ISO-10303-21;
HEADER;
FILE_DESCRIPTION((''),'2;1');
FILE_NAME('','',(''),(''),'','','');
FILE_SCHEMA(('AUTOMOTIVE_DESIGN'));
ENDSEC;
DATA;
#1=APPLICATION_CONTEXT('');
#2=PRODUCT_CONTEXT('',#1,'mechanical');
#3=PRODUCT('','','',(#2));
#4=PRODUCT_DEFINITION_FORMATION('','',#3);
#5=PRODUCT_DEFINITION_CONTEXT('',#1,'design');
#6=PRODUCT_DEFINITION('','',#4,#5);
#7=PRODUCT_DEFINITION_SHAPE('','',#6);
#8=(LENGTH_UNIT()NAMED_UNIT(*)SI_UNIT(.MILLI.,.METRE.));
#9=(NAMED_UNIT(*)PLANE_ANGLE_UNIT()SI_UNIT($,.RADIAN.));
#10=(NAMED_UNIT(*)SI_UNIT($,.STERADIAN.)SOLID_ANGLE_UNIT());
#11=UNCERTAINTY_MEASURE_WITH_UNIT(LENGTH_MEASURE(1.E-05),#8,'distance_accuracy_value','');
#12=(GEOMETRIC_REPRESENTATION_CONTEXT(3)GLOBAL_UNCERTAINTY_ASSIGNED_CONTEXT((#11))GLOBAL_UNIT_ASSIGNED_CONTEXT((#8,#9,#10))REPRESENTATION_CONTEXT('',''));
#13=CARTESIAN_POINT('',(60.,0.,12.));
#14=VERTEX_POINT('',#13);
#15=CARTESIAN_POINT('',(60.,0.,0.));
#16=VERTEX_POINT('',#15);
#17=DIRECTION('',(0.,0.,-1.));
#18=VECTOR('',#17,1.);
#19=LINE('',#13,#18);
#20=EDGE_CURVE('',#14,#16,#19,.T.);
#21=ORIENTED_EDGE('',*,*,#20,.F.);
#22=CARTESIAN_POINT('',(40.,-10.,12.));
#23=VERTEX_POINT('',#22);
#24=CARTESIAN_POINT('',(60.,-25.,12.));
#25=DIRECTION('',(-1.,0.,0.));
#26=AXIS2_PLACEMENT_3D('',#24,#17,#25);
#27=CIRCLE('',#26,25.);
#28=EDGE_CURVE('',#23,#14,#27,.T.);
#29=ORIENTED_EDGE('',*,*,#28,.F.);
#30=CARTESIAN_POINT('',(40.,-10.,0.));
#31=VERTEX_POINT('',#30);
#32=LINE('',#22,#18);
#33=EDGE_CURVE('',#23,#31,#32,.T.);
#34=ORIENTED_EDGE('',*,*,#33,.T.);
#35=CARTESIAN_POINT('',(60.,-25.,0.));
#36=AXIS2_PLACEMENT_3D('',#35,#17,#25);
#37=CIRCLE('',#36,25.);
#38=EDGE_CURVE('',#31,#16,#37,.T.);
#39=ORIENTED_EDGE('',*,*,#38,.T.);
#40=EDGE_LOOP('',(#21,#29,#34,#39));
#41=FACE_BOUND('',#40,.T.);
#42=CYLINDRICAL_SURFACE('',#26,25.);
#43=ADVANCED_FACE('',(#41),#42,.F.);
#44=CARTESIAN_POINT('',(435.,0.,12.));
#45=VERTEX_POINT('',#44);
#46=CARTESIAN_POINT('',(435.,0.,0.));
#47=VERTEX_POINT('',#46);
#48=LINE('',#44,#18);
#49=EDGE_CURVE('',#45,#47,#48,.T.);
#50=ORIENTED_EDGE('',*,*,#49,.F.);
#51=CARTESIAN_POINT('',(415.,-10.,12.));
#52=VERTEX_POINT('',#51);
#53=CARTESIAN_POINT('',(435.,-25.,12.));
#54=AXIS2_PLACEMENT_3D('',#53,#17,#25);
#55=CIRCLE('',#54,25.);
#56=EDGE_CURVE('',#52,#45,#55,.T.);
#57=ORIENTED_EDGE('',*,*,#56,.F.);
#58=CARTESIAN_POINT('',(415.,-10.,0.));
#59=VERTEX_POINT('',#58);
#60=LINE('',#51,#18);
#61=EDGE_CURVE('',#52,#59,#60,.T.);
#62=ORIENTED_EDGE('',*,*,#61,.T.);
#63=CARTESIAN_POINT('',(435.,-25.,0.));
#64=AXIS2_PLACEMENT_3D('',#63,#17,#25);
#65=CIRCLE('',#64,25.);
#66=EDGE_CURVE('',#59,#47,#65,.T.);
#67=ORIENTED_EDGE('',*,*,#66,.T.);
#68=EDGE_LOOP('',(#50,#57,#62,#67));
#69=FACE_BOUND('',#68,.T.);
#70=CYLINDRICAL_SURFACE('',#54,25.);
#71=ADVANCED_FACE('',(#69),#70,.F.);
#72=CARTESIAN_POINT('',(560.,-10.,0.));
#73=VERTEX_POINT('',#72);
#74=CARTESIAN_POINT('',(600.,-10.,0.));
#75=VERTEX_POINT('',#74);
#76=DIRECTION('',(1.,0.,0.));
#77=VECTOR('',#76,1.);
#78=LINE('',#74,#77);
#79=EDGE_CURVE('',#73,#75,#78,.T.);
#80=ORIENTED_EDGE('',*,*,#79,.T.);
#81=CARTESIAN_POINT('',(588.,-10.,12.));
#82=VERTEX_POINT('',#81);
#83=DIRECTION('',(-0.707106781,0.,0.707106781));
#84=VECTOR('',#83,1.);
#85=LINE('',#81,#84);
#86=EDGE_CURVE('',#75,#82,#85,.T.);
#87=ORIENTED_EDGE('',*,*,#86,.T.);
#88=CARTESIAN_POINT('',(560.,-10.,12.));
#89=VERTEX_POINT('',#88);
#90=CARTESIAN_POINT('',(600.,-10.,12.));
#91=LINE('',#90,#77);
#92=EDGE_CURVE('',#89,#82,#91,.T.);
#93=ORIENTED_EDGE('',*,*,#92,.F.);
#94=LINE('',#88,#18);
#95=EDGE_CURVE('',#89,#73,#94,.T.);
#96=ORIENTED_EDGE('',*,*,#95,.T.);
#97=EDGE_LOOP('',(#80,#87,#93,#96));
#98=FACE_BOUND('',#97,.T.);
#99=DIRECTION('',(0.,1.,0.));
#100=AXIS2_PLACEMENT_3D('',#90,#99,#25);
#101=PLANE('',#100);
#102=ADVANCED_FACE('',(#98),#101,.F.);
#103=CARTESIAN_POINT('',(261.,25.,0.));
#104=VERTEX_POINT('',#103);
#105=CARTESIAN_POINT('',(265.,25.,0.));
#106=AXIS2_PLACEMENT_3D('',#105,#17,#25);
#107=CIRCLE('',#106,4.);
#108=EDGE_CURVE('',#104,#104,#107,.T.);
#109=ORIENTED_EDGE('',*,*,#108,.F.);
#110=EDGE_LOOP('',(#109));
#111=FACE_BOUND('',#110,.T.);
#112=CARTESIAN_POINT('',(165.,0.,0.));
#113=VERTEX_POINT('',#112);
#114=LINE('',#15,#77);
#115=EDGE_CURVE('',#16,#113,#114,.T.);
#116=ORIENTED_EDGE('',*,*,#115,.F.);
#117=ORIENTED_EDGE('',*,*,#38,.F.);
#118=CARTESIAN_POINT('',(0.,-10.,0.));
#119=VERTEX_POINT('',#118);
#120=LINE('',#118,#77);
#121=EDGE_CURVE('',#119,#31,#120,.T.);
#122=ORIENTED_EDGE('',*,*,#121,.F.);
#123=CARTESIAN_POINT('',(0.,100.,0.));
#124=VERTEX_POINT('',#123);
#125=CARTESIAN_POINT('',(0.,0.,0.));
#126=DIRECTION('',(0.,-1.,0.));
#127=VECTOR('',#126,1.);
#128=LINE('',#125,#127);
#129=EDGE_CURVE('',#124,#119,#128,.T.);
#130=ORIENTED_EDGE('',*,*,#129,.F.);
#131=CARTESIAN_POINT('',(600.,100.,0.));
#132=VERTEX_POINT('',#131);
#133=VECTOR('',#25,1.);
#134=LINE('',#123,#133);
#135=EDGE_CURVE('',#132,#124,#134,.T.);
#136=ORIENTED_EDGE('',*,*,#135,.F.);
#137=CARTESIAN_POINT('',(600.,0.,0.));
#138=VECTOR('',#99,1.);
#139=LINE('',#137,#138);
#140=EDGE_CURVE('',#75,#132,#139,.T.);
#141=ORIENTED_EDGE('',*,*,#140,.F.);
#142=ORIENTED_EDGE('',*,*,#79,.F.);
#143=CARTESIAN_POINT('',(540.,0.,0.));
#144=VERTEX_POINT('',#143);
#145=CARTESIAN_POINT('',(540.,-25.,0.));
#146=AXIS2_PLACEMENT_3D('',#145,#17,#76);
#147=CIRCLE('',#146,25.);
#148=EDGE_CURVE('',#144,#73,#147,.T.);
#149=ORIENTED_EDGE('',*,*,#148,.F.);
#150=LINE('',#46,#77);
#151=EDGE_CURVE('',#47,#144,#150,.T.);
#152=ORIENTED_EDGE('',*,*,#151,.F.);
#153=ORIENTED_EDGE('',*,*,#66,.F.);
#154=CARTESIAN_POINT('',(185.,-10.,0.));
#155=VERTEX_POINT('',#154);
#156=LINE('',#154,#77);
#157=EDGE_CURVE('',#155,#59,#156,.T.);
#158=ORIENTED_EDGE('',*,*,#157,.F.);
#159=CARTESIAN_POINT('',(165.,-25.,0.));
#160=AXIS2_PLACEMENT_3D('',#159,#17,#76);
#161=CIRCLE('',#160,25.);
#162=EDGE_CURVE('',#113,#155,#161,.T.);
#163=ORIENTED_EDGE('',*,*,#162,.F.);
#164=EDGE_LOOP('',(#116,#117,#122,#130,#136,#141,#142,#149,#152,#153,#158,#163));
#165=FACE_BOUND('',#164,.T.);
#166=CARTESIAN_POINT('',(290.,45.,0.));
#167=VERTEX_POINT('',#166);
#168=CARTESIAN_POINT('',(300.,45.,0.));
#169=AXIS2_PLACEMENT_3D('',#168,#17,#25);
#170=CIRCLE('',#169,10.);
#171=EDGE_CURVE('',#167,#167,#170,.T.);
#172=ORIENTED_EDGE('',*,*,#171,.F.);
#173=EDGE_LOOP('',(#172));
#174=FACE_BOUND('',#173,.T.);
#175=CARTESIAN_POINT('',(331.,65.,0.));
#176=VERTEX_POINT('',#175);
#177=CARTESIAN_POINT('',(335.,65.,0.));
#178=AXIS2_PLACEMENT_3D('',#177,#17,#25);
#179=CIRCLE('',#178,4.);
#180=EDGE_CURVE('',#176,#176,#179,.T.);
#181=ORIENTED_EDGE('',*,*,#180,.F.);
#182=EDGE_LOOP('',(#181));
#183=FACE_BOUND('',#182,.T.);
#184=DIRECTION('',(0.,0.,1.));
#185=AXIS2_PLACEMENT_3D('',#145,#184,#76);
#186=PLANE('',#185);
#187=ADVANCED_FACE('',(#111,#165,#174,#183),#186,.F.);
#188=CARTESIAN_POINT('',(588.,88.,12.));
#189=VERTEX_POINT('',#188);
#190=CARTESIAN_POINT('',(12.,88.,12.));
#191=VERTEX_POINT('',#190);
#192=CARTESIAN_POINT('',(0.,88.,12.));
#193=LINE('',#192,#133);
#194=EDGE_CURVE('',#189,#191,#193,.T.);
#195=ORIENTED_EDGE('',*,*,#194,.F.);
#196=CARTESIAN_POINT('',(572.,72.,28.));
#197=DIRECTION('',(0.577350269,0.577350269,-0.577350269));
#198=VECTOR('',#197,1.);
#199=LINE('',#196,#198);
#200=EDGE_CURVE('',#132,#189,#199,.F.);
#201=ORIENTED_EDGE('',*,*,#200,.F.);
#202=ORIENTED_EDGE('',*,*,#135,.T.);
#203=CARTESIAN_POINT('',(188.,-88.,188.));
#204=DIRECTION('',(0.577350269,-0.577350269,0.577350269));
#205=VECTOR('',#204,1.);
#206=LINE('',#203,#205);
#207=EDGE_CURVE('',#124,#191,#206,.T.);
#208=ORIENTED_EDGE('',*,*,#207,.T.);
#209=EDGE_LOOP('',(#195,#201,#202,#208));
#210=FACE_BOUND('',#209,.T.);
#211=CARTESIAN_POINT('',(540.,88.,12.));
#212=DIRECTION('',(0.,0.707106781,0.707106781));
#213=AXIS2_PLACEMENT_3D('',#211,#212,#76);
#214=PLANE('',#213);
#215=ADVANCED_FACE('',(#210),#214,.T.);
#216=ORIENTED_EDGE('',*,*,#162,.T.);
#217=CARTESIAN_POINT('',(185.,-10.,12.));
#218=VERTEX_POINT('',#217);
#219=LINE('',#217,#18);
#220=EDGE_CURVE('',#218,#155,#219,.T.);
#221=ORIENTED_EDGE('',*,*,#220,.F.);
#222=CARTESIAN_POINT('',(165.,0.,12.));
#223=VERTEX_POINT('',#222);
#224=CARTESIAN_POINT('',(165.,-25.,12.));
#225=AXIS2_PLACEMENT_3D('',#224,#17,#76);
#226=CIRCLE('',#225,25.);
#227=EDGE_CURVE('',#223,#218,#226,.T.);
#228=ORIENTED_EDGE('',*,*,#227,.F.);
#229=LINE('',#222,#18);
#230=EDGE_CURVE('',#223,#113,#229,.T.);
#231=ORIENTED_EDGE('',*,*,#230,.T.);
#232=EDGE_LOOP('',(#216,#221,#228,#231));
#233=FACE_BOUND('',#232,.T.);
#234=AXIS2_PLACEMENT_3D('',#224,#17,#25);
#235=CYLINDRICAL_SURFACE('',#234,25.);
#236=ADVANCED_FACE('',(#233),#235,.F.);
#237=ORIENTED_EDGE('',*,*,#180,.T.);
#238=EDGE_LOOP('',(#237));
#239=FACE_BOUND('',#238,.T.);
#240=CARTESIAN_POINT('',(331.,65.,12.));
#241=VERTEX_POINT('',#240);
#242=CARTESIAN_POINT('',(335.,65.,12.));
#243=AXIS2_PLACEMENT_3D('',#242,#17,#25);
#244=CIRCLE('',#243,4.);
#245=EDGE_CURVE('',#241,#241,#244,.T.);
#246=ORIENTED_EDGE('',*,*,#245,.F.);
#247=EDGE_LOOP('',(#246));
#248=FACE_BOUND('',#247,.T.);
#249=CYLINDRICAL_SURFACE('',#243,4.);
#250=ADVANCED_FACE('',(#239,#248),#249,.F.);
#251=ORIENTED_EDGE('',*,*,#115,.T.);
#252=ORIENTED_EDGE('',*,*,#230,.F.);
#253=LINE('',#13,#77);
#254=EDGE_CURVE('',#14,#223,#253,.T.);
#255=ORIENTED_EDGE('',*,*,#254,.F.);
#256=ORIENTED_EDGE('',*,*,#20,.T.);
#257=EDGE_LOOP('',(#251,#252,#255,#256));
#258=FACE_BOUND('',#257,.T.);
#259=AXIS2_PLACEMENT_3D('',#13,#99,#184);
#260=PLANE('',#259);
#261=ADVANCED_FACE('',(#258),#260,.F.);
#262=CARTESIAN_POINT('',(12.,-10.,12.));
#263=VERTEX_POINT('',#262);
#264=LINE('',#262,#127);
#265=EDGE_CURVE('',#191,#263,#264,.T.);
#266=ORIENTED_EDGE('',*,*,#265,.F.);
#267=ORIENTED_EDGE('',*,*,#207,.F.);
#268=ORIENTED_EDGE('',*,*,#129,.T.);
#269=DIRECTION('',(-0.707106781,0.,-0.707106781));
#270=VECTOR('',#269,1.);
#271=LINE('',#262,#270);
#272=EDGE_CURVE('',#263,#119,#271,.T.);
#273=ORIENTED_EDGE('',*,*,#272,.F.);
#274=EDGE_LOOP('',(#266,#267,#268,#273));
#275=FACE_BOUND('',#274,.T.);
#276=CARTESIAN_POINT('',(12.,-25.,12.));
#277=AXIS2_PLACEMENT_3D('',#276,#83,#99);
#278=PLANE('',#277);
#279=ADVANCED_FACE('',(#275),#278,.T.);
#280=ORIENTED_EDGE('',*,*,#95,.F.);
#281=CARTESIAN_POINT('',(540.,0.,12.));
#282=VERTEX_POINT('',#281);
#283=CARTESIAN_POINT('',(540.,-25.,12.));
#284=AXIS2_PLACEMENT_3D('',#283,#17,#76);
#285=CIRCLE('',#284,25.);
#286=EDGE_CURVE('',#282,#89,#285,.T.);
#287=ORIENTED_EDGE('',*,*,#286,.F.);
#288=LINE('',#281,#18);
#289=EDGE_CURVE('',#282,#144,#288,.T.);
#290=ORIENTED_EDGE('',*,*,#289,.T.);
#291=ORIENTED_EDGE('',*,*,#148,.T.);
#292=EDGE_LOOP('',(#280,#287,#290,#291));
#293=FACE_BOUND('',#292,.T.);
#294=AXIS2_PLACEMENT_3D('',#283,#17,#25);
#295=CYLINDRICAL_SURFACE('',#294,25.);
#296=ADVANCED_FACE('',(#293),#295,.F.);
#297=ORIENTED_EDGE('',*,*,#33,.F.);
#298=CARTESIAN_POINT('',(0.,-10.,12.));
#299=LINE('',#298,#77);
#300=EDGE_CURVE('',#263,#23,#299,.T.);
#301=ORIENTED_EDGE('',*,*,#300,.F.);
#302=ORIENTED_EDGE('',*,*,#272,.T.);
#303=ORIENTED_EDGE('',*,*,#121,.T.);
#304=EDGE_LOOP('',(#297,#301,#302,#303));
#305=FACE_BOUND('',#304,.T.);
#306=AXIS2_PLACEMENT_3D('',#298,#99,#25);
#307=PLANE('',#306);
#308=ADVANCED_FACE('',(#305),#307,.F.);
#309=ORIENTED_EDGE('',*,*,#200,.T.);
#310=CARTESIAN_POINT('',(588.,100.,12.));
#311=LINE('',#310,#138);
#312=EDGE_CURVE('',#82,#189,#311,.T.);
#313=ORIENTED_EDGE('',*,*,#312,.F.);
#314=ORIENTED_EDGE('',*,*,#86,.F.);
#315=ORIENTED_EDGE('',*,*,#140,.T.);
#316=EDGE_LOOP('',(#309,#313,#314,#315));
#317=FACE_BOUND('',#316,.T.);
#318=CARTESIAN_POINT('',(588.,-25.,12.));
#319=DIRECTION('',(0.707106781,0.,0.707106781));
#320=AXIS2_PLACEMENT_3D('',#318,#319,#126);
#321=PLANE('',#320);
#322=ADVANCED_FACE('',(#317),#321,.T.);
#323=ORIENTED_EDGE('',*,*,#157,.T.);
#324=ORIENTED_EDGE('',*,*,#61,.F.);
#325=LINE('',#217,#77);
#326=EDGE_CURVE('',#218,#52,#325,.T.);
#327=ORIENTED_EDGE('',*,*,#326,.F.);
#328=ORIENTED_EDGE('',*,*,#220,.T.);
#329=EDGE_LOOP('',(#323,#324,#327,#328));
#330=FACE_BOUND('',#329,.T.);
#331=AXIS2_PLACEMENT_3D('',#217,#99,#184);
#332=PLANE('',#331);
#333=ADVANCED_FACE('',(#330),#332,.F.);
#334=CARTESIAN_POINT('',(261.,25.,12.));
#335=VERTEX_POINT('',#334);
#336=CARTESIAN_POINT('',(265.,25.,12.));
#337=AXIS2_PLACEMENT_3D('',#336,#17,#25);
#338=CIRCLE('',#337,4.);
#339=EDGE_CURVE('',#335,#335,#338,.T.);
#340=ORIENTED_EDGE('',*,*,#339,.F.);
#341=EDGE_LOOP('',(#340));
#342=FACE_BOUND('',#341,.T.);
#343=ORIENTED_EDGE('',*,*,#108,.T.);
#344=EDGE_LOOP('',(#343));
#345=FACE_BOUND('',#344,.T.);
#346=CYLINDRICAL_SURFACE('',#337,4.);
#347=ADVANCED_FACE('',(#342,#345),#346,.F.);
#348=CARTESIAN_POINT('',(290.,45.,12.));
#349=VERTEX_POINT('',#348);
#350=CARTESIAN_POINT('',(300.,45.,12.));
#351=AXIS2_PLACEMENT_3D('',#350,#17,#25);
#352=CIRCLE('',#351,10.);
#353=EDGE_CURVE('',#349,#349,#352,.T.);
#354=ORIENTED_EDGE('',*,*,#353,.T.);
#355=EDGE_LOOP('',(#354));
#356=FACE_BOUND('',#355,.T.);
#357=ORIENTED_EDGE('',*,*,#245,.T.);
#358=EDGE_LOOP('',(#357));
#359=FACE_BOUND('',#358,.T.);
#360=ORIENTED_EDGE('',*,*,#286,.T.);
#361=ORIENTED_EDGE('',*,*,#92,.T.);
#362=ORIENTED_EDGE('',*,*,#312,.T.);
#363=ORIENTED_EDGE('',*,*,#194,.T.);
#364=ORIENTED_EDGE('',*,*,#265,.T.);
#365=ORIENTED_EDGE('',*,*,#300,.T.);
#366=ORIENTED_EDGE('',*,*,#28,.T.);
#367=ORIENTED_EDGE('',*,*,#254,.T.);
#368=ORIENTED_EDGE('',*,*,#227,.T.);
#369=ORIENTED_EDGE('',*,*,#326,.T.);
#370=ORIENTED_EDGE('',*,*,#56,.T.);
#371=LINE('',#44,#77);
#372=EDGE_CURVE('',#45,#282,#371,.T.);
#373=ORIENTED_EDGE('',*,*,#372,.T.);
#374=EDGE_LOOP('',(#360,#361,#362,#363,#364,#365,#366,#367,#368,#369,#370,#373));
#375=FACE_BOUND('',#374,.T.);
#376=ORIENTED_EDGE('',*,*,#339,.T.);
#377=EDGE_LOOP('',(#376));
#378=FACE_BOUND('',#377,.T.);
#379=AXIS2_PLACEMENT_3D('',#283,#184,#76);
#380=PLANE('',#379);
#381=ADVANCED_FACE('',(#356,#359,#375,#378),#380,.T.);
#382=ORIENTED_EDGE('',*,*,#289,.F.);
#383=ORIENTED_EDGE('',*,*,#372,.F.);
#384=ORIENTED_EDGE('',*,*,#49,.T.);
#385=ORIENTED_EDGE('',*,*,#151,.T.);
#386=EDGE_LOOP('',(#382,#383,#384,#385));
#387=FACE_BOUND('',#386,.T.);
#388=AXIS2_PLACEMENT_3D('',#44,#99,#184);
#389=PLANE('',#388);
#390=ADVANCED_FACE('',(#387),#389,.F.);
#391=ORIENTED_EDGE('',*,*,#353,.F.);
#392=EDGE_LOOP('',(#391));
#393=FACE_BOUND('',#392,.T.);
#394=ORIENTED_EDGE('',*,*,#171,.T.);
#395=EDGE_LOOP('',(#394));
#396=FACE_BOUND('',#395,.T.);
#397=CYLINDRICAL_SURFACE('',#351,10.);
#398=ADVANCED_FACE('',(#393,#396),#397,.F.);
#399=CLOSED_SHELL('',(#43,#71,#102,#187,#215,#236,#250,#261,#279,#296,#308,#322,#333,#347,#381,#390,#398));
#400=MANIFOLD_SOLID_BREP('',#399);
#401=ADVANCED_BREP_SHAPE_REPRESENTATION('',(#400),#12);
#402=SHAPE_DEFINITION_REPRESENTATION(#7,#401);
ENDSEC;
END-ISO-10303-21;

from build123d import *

# Parameters (mm, degrees)
BOSS_EXTRUDE1_DEPTH = 12
CHAMFER1_SIZE       = 12
SKETCH2_R           = 4
SKETCH2_R_2         = 10
CUT_EXTRUDE1_DEPTH  = 609.394608786


with BuildPart() as part:
    # Sketch1 → Boss-Extrude1 (new body)
    with BuildSketch(Plane.XY):
        with BuildLine():
            Line((0, 0), (0, -10))
            Line((0, -10), (40, -10))
            ThreePointArc((40, -10), (48.819660113, -2.639320225), (60, 0))
            Line((60, 0), (165, 0))
            ThreePointArc((165, 0), (176.180339887, -2.639320225), (185, -10))
            Line((185, -10), (415, -10))
            ThreePointArc((415, -10), (423.819660113, -2.639320225), (435, 0))
            Line((435, 0), (540, 0))
            ThreePointArc((540, 0), (551.180339887, -2.639320225), (560, -10))
            Line((560, -10), (600, -10))
            Line((600, -10), (600, 0))
            Line((600, 0), (600, 100))
            Line((600, 100), (0, 100))
            Line((0, 100), (0, 0))
        make_face()
    extrude(amount=BOSS_EXTRUDE1_DEPTH)

    # Chamfer1
    chamfer1_edges = [part.edges().sort_by_distance(p)[0] for p in [
        (300, 100, 12),
        (600, 45, 12),
        (0, 45, 12),
    ]]
    chamfer(chamfer1_edges, length=CHAMFER1_SIZE - 0.0001)  # a hair under: the kernel refuses the full size

    # Sketch2 → Cut-Extrude1 (cut, through all)
    with BuildSketch(Plane(origin=(0, 0, 0), x_dir=(-1, 0, 0), z_dir=(0, 0, -1))):
        with Locations((-335, 65)):
            Circle(SKETCH2_R)
        with Locations((-300, 45)):
            Circle(SKETCH2_R_2)
        with Locations((-265, 25)):
            Circle(SKETCH2_R)
    extrude(amount=-CUT_EXTRUDE1_DEPTH, mode=Mode.SUBTRACT)


solid = part.part
